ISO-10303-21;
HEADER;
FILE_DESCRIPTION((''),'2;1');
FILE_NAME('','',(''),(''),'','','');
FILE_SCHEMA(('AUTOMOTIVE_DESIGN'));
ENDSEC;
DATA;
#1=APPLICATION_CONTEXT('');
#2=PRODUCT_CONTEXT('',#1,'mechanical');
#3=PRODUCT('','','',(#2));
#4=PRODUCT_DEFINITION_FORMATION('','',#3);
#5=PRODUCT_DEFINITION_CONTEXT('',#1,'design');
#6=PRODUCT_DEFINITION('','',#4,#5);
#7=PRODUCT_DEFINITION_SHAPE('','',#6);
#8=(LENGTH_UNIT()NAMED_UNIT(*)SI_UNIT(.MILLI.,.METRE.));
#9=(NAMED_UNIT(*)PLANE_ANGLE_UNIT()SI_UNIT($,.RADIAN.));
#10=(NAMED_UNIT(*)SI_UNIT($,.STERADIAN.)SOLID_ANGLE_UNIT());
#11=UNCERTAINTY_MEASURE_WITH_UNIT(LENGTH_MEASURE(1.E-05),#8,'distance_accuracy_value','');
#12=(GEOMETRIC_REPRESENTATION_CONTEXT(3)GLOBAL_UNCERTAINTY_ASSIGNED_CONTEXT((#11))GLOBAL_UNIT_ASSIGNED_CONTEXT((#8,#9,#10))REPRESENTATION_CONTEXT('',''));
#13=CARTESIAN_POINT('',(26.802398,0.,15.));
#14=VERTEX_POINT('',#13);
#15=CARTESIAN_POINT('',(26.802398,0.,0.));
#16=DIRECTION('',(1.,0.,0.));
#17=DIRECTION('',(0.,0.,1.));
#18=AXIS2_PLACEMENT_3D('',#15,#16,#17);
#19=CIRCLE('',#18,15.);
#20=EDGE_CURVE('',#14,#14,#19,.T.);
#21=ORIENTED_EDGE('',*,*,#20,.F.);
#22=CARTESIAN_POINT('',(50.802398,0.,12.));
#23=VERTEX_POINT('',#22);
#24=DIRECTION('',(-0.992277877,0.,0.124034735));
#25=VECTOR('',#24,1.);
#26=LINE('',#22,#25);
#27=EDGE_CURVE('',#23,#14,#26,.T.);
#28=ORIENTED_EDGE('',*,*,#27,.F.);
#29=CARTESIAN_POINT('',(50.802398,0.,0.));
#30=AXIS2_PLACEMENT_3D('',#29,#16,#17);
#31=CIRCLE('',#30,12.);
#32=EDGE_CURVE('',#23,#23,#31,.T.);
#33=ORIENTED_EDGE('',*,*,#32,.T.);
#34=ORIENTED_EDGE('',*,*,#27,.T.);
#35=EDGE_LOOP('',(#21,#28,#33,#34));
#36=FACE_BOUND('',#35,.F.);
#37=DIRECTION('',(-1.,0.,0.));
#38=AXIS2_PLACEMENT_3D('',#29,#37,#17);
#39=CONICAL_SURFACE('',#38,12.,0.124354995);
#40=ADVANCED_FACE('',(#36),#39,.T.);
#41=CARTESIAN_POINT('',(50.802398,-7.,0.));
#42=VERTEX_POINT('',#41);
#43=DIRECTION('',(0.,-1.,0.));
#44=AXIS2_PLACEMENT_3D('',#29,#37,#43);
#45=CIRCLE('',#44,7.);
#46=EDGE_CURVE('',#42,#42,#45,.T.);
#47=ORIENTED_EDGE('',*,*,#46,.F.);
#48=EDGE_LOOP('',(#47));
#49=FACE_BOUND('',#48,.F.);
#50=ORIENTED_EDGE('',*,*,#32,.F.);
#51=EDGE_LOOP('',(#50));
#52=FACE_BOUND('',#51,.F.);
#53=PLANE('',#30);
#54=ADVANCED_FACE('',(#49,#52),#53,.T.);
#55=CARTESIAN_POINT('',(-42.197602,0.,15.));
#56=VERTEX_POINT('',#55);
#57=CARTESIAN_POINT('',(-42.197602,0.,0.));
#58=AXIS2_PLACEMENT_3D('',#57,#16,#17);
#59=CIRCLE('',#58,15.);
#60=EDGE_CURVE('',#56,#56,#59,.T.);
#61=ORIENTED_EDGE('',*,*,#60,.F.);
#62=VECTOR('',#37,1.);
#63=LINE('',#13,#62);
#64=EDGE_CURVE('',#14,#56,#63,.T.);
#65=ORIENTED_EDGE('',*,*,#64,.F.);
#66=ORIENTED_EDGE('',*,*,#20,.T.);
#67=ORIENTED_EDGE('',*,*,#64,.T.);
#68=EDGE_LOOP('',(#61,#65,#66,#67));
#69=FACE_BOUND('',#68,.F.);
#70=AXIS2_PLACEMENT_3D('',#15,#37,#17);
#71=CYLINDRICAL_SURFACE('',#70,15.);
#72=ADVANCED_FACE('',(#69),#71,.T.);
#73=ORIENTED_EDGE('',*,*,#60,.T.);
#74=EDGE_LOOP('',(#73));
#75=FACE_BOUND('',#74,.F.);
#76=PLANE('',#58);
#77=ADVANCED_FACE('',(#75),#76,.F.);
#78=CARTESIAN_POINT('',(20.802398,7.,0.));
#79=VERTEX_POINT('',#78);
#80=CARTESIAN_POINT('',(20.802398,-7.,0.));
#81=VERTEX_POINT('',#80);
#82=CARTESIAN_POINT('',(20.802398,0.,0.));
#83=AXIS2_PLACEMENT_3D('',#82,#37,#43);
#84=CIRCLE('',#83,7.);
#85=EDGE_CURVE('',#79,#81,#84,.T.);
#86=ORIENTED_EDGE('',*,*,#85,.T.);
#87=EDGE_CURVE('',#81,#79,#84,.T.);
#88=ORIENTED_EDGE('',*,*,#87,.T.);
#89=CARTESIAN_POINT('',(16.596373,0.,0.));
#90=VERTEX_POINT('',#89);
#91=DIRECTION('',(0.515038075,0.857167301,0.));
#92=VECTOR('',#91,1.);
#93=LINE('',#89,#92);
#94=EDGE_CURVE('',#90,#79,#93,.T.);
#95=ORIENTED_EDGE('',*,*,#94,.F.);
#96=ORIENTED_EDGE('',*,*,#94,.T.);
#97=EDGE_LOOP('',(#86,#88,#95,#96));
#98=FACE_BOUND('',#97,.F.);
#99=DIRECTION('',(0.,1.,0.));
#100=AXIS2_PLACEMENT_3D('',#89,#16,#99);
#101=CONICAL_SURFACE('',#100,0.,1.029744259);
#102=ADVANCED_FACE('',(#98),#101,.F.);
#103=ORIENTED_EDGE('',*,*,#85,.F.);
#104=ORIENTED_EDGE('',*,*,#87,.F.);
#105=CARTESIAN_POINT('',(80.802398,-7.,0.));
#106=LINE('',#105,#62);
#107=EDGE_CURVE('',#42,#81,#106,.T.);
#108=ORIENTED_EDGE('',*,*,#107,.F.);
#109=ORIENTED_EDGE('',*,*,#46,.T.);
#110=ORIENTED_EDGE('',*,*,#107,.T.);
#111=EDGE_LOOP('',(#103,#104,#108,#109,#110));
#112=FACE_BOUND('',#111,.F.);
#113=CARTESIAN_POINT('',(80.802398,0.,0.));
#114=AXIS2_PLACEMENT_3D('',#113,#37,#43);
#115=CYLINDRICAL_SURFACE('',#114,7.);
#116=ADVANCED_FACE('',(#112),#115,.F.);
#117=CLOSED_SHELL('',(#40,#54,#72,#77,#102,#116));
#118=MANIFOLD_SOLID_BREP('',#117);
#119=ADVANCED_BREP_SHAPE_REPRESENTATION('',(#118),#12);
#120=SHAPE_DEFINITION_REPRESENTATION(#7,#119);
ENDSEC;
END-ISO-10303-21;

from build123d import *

# Parameters (mm, degrees)
F2_R     = 7
F3_DEPTH = 30
F5_D     = 14
F5_DEPTH = 30
F5_TIP   = 4.2060243332


with BuildPart() as f1:
    # F0 (on Front) → F1 (revolve)
    with BuildSketch(Plane.XZ):
        Polygon((-42.1976023009, 15), (-42.1976023009, 0), (-20.7868143916, 0), (26.8023976991, 0), (26.8023976991, 15), align=None)
        Polygon((26.8023976991, 15), (26.8023976991, 0), (50.8023976991, 0), (50.8023976991, 12), align=None)
    revolve(axis=Axis((4.7784452844, 0, 0), (1, 0, 0)))

    # F2 (on face) → F3 (join)
    with BuildSketch(Plane.YZ.offset(50.8023976991)):
        Circle(F2_R)
    extrude(amount=-F3_DEPTH)

    # F5
    with Locations(Plane.YZ.offset(50.8023976991)):
        with Locations((0, 0)):
            Hole(F5_D / 2, depth=F5_DEPTH)
            with Locations((0, 0, -(F5_DEPTH + F5_TIP / 2))):  # 118° drill point
                Cone(0, F5_D / 2, F5_TIP, mode=Mode.SUBTRACT)


solid = f1.part
